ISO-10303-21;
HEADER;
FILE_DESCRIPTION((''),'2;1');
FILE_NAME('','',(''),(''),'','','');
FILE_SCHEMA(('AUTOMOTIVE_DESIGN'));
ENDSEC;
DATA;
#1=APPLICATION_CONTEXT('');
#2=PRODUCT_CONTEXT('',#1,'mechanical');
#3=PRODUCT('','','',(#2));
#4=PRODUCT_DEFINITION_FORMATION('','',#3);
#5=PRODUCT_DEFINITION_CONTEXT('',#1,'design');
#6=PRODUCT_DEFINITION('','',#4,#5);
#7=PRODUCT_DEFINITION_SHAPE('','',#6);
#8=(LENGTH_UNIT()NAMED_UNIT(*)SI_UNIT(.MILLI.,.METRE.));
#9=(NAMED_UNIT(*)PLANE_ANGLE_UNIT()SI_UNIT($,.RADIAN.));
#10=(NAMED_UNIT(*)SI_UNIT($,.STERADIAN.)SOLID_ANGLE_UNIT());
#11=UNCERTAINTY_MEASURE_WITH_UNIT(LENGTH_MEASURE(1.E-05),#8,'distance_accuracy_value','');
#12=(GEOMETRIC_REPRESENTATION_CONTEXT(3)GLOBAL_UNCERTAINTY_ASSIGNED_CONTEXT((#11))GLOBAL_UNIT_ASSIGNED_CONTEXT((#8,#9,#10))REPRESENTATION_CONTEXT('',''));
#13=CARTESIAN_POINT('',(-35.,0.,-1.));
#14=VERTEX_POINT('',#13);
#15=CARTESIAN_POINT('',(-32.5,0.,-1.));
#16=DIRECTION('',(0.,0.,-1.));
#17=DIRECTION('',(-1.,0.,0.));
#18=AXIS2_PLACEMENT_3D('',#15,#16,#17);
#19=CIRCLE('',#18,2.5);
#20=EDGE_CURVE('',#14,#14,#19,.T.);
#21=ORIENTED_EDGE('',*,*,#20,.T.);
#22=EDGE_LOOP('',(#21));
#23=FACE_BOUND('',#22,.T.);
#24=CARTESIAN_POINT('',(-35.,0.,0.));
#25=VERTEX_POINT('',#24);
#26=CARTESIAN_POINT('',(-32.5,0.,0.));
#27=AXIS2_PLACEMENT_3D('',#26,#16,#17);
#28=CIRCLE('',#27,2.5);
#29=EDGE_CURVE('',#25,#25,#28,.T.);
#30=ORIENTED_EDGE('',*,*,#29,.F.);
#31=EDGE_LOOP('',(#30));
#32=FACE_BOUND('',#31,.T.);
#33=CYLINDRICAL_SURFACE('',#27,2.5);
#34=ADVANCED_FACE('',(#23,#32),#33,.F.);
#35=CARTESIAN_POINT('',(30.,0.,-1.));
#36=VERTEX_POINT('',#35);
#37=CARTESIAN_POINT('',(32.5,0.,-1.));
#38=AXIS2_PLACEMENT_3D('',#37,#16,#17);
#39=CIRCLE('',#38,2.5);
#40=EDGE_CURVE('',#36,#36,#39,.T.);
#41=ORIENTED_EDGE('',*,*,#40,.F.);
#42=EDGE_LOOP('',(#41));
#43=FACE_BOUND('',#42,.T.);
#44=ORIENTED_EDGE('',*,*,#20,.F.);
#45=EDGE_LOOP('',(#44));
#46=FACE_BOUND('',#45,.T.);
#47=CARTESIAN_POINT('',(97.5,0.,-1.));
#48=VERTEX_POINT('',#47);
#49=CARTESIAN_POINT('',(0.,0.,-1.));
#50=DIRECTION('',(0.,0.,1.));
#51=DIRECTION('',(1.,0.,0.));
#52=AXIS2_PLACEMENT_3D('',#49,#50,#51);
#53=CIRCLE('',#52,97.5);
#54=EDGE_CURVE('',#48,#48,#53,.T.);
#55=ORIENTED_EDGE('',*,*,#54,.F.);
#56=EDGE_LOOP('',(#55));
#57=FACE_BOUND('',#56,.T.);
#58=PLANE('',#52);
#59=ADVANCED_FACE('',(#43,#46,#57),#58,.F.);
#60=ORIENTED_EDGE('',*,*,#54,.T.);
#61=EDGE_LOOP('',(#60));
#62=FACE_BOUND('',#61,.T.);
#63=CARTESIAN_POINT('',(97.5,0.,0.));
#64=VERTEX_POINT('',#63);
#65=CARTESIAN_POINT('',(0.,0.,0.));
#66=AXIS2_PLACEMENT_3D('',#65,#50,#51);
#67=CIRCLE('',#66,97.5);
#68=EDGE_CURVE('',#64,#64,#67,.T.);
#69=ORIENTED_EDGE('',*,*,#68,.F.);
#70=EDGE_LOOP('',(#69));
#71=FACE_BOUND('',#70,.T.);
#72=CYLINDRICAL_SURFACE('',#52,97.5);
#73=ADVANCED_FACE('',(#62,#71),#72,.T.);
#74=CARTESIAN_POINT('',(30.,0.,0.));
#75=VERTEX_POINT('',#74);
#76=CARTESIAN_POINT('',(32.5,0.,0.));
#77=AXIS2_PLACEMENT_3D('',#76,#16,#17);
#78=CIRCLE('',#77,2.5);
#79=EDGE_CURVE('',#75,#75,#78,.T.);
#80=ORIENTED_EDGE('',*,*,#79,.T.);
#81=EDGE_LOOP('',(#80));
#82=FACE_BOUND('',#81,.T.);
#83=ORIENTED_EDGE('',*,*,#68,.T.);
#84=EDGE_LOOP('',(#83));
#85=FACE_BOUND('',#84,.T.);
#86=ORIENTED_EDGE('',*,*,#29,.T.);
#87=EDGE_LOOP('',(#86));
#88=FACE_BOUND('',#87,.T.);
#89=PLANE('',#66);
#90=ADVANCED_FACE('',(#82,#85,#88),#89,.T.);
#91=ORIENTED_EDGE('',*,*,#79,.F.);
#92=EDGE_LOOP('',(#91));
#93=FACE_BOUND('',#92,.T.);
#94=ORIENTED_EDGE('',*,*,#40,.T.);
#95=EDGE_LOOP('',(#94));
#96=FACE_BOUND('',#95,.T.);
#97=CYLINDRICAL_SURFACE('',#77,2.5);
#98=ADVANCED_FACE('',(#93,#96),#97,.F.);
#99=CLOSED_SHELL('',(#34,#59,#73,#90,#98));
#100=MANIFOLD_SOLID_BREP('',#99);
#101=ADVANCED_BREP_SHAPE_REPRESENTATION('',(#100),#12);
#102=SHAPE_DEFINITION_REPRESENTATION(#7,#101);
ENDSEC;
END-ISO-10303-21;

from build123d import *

# Parameters (mm, degrees)
ESBO_O1_R             = 97.5
FLANGE_BASE1_DEPTH    = 1
ESBO_O6_R             = 2.5
CORTE_EXTRUS_O1_DEPTH = 138.889448472


# Sheet-metal steps are written as plain solids
with BuildPart() as part:
    # Esboço1 → Flange-base1 (new body)
    with BuildSketch(Plane.XY):
        Circle(ESBO_O1_R)
    extrude(amount=-FLANGE_BASE1_DEPTH)

    # Esboço6 → Corte-extrusão1 (cut, through all)
    with BuildSketch(Plane(origin=(0, 0, -1), x_dir=(-1, 0, 0), z_dir=(0, 0, -1))):
        with Locations((-32.5, 0)):
            Circle(ESBO_O6_R)
        with Locations((32.5, 0)):
            Circle(ESBO_O6_R)
    extrude(amount=-CORTE_EXTRUS_O1_DEPTH, mode=Mode.SUBTRACT)


solid = part.part
